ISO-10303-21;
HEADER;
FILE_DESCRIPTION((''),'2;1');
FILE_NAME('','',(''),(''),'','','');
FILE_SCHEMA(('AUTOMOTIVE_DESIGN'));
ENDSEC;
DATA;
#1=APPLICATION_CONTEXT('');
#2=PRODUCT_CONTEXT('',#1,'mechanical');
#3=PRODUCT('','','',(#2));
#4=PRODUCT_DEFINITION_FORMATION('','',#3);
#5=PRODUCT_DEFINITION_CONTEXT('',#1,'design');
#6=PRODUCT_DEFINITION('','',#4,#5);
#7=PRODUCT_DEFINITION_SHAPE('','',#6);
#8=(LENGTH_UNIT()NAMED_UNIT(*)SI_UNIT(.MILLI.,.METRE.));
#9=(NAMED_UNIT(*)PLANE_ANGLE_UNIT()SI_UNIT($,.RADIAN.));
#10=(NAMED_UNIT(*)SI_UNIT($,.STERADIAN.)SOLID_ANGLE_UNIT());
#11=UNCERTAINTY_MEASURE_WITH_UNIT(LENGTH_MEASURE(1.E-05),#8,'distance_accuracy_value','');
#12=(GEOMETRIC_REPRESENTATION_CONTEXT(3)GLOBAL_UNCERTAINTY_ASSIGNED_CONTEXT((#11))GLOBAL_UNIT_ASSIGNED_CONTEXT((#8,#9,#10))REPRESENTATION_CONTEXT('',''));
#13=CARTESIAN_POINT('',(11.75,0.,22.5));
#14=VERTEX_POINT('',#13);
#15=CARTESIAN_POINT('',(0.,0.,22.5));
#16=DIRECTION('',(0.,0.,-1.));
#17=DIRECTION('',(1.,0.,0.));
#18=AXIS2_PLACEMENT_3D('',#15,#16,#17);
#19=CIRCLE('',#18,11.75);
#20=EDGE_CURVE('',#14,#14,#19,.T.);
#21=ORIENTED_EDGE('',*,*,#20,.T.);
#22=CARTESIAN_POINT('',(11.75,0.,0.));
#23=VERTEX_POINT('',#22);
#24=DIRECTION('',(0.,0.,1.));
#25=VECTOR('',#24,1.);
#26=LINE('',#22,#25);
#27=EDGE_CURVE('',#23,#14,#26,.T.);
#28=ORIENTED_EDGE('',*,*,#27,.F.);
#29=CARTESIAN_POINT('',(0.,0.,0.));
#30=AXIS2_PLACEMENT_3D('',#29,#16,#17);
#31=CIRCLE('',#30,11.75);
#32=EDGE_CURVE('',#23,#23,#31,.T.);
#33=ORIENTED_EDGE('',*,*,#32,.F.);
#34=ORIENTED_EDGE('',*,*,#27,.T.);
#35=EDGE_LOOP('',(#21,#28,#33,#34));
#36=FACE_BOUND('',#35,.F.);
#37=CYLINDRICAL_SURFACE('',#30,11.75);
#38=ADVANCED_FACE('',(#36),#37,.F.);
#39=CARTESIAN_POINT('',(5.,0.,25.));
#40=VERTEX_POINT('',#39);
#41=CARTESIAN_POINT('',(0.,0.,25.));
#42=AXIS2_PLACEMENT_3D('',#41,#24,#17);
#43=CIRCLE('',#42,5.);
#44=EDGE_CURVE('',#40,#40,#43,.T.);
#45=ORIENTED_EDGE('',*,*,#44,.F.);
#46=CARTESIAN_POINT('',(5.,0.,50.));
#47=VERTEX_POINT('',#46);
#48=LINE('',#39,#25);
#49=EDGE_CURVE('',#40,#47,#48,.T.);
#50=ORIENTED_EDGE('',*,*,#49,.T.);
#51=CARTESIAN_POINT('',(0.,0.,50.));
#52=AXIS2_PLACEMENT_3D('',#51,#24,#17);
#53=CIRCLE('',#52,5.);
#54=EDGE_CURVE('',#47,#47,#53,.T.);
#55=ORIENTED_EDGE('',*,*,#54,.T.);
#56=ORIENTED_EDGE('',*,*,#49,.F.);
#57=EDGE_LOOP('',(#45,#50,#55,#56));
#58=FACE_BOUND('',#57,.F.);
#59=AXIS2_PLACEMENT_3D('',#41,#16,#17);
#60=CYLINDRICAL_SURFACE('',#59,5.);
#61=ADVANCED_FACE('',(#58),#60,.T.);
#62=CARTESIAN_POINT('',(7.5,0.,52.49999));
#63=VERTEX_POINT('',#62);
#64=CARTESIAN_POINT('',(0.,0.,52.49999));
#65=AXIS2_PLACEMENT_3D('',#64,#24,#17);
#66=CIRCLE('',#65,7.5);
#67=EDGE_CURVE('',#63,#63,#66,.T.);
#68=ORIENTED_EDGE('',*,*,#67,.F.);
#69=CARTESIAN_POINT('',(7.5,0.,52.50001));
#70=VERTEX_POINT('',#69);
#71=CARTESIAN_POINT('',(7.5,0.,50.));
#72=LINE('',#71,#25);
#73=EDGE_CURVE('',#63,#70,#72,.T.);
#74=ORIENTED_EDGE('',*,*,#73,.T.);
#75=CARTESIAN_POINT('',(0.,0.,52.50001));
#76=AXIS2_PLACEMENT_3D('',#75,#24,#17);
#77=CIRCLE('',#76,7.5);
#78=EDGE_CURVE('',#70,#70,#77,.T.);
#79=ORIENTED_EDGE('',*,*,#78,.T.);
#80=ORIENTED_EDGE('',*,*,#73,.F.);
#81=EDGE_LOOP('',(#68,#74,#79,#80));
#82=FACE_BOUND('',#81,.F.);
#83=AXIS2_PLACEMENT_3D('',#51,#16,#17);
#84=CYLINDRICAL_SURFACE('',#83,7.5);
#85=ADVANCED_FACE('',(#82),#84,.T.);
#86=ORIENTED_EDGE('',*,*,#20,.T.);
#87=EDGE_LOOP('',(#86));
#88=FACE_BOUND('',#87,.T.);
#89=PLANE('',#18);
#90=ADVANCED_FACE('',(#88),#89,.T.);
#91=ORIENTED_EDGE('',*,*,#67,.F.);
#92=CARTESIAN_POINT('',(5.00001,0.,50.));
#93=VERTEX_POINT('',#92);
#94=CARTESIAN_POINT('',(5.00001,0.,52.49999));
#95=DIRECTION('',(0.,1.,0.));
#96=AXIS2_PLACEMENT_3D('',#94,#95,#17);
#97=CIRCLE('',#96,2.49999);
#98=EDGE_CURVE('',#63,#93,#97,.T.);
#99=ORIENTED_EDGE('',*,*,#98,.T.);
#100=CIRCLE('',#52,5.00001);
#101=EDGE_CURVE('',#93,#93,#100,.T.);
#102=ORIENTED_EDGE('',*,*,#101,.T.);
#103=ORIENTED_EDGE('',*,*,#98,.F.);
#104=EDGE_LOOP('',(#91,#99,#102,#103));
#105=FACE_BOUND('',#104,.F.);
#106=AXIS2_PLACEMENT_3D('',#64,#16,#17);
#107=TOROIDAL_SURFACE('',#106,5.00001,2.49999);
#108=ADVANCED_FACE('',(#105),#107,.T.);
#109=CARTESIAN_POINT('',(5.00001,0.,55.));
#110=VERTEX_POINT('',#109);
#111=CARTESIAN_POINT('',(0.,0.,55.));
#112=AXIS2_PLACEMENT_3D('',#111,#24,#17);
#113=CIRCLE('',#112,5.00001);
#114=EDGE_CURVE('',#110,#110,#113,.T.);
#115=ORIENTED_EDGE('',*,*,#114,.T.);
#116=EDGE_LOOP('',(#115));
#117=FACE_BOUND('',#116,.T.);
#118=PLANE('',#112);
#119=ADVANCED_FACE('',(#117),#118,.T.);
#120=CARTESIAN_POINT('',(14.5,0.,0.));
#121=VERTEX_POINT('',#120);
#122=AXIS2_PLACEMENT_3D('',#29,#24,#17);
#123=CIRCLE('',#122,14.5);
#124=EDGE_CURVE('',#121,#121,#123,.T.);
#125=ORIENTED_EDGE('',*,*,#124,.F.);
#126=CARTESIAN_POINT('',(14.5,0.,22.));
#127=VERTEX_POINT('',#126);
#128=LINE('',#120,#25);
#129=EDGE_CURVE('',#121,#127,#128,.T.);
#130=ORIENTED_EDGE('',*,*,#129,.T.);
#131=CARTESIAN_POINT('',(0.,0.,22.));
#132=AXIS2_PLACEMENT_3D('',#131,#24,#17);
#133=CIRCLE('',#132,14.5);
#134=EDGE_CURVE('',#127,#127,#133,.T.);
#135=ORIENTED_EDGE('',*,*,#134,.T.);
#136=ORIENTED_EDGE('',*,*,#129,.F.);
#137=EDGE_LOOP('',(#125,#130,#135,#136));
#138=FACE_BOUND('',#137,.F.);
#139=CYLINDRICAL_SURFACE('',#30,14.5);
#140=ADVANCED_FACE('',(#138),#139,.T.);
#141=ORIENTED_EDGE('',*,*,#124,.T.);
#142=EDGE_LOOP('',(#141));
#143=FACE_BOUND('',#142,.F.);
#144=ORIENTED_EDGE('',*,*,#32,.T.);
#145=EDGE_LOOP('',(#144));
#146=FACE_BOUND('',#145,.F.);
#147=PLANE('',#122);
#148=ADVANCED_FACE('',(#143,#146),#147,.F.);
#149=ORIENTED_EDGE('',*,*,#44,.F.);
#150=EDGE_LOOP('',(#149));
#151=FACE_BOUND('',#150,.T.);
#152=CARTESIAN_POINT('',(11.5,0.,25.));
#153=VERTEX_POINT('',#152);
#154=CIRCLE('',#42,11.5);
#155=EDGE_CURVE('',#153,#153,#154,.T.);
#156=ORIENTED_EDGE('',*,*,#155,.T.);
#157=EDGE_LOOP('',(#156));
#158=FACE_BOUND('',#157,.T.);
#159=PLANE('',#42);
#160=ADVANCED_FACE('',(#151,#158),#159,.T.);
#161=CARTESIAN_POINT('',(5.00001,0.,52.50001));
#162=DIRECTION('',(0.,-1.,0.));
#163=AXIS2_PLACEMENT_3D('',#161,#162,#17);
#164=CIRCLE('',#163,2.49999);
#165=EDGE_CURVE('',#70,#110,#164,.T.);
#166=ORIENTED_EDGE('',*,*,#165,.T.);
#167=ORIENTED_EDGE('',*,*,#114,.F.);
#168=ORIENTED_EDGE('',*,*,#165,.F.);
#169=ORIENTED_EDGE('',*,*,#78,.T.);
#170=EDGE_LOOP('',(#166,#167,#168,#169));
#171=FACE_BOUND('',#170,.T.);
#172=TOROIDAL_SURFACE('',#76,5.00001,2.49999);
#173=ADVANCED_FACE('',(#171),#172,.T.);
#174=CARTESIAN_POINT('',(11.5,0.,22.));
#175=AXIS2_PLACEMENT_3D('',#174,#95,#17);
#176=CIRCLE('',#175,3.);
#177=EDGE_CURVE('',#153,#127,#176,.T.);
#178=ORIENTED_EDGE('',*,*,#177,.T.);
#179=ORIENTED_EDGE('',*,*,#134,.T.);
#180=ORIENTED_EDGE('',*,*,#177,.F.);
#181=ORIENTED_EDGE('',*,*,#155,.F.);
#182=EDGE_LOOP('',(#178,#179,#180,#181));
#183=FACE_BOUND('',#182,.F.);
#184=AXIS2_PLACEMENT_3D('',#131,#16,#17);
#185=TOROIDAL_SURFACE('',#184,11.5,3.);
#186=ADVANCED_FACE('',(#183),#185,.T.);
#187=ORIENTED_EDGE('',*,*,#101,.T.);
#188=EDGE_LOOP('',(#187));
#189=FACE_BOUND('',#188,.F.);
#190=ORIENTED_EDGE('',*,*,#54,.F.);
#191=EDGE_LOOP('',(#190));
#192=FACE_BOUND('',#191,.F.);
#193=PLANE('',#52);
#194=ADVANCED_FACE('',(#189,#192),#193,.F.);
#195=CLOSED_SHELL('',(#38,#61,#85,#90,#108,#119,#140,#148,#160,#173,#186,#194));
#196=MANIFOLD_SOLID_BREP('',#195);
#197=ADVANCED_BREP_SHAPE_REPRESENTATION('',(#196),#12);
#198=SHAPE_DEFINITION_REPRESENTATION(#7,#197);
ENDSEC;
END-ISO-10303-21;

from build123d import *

# Parameters (mm, degrees)
F0_R     = 14.5
F1_DEPTH = 25
F2_R     = 5
F3_DEPTH = 25
F4_R     = 7.5
F5_DEPTH = 5
F6_R     = 2.49999
F7_R     = 3
F8_R     = 11.75
F9_DEPTH = 22.5


# Not quite as in the source:
# - a fillet or chamfer is up to 0.001 mm smaller than in the source, because OpenCascade refuses the exact size


with BuildPart() as f1:
    # F0 (on Top) → F1 (new body)
    with BuildSketch(Plane.XY):
        Circle(F0_R)
    extrude(amount=F1_DEPTH)

    # F2 (on face) → F3 (join)
    with BuildSketch(Plane.XY.offset(25)):
        Circle(F2_R)
    extrude(amount=F3_DEPTH)

    # F4 (on face) → F5 (join)
    with BuildSketch(Plane.XY.offset(50)):
        Circle(F4_R)
    extrude(amount=F5_DEPTH)

    # F6 (radius 2.5 in the source; OpenCascade refuses exactly that, so slightly less here)
    f6_edges = [f1.edges().sort_by_distance(p)[0] for p in [
        (-7.5, 0, 50),
        (-7.5, 0, 55),
    ]]
    fillet(f6_edges, radius=F6_R)

    # F7
    f7_edges = [f1.edges().sort_by_distance(p)[0] for p in [
        (-14.5, 0, 25),
    ]]
    fillet(f7_edges, radius=F7_R)

    # F8 (on face) → F9 (cut)
    with BuildSketch(Plane(origin=(0, 0, 0), x_dir=(1, 0, 0), z_dir=(0, 0, -1))):
        Circle(F8_R)
    extrude(amount=-F9_DEPTH, mode=Mode.SUBTRACT)


solid = f1.part
